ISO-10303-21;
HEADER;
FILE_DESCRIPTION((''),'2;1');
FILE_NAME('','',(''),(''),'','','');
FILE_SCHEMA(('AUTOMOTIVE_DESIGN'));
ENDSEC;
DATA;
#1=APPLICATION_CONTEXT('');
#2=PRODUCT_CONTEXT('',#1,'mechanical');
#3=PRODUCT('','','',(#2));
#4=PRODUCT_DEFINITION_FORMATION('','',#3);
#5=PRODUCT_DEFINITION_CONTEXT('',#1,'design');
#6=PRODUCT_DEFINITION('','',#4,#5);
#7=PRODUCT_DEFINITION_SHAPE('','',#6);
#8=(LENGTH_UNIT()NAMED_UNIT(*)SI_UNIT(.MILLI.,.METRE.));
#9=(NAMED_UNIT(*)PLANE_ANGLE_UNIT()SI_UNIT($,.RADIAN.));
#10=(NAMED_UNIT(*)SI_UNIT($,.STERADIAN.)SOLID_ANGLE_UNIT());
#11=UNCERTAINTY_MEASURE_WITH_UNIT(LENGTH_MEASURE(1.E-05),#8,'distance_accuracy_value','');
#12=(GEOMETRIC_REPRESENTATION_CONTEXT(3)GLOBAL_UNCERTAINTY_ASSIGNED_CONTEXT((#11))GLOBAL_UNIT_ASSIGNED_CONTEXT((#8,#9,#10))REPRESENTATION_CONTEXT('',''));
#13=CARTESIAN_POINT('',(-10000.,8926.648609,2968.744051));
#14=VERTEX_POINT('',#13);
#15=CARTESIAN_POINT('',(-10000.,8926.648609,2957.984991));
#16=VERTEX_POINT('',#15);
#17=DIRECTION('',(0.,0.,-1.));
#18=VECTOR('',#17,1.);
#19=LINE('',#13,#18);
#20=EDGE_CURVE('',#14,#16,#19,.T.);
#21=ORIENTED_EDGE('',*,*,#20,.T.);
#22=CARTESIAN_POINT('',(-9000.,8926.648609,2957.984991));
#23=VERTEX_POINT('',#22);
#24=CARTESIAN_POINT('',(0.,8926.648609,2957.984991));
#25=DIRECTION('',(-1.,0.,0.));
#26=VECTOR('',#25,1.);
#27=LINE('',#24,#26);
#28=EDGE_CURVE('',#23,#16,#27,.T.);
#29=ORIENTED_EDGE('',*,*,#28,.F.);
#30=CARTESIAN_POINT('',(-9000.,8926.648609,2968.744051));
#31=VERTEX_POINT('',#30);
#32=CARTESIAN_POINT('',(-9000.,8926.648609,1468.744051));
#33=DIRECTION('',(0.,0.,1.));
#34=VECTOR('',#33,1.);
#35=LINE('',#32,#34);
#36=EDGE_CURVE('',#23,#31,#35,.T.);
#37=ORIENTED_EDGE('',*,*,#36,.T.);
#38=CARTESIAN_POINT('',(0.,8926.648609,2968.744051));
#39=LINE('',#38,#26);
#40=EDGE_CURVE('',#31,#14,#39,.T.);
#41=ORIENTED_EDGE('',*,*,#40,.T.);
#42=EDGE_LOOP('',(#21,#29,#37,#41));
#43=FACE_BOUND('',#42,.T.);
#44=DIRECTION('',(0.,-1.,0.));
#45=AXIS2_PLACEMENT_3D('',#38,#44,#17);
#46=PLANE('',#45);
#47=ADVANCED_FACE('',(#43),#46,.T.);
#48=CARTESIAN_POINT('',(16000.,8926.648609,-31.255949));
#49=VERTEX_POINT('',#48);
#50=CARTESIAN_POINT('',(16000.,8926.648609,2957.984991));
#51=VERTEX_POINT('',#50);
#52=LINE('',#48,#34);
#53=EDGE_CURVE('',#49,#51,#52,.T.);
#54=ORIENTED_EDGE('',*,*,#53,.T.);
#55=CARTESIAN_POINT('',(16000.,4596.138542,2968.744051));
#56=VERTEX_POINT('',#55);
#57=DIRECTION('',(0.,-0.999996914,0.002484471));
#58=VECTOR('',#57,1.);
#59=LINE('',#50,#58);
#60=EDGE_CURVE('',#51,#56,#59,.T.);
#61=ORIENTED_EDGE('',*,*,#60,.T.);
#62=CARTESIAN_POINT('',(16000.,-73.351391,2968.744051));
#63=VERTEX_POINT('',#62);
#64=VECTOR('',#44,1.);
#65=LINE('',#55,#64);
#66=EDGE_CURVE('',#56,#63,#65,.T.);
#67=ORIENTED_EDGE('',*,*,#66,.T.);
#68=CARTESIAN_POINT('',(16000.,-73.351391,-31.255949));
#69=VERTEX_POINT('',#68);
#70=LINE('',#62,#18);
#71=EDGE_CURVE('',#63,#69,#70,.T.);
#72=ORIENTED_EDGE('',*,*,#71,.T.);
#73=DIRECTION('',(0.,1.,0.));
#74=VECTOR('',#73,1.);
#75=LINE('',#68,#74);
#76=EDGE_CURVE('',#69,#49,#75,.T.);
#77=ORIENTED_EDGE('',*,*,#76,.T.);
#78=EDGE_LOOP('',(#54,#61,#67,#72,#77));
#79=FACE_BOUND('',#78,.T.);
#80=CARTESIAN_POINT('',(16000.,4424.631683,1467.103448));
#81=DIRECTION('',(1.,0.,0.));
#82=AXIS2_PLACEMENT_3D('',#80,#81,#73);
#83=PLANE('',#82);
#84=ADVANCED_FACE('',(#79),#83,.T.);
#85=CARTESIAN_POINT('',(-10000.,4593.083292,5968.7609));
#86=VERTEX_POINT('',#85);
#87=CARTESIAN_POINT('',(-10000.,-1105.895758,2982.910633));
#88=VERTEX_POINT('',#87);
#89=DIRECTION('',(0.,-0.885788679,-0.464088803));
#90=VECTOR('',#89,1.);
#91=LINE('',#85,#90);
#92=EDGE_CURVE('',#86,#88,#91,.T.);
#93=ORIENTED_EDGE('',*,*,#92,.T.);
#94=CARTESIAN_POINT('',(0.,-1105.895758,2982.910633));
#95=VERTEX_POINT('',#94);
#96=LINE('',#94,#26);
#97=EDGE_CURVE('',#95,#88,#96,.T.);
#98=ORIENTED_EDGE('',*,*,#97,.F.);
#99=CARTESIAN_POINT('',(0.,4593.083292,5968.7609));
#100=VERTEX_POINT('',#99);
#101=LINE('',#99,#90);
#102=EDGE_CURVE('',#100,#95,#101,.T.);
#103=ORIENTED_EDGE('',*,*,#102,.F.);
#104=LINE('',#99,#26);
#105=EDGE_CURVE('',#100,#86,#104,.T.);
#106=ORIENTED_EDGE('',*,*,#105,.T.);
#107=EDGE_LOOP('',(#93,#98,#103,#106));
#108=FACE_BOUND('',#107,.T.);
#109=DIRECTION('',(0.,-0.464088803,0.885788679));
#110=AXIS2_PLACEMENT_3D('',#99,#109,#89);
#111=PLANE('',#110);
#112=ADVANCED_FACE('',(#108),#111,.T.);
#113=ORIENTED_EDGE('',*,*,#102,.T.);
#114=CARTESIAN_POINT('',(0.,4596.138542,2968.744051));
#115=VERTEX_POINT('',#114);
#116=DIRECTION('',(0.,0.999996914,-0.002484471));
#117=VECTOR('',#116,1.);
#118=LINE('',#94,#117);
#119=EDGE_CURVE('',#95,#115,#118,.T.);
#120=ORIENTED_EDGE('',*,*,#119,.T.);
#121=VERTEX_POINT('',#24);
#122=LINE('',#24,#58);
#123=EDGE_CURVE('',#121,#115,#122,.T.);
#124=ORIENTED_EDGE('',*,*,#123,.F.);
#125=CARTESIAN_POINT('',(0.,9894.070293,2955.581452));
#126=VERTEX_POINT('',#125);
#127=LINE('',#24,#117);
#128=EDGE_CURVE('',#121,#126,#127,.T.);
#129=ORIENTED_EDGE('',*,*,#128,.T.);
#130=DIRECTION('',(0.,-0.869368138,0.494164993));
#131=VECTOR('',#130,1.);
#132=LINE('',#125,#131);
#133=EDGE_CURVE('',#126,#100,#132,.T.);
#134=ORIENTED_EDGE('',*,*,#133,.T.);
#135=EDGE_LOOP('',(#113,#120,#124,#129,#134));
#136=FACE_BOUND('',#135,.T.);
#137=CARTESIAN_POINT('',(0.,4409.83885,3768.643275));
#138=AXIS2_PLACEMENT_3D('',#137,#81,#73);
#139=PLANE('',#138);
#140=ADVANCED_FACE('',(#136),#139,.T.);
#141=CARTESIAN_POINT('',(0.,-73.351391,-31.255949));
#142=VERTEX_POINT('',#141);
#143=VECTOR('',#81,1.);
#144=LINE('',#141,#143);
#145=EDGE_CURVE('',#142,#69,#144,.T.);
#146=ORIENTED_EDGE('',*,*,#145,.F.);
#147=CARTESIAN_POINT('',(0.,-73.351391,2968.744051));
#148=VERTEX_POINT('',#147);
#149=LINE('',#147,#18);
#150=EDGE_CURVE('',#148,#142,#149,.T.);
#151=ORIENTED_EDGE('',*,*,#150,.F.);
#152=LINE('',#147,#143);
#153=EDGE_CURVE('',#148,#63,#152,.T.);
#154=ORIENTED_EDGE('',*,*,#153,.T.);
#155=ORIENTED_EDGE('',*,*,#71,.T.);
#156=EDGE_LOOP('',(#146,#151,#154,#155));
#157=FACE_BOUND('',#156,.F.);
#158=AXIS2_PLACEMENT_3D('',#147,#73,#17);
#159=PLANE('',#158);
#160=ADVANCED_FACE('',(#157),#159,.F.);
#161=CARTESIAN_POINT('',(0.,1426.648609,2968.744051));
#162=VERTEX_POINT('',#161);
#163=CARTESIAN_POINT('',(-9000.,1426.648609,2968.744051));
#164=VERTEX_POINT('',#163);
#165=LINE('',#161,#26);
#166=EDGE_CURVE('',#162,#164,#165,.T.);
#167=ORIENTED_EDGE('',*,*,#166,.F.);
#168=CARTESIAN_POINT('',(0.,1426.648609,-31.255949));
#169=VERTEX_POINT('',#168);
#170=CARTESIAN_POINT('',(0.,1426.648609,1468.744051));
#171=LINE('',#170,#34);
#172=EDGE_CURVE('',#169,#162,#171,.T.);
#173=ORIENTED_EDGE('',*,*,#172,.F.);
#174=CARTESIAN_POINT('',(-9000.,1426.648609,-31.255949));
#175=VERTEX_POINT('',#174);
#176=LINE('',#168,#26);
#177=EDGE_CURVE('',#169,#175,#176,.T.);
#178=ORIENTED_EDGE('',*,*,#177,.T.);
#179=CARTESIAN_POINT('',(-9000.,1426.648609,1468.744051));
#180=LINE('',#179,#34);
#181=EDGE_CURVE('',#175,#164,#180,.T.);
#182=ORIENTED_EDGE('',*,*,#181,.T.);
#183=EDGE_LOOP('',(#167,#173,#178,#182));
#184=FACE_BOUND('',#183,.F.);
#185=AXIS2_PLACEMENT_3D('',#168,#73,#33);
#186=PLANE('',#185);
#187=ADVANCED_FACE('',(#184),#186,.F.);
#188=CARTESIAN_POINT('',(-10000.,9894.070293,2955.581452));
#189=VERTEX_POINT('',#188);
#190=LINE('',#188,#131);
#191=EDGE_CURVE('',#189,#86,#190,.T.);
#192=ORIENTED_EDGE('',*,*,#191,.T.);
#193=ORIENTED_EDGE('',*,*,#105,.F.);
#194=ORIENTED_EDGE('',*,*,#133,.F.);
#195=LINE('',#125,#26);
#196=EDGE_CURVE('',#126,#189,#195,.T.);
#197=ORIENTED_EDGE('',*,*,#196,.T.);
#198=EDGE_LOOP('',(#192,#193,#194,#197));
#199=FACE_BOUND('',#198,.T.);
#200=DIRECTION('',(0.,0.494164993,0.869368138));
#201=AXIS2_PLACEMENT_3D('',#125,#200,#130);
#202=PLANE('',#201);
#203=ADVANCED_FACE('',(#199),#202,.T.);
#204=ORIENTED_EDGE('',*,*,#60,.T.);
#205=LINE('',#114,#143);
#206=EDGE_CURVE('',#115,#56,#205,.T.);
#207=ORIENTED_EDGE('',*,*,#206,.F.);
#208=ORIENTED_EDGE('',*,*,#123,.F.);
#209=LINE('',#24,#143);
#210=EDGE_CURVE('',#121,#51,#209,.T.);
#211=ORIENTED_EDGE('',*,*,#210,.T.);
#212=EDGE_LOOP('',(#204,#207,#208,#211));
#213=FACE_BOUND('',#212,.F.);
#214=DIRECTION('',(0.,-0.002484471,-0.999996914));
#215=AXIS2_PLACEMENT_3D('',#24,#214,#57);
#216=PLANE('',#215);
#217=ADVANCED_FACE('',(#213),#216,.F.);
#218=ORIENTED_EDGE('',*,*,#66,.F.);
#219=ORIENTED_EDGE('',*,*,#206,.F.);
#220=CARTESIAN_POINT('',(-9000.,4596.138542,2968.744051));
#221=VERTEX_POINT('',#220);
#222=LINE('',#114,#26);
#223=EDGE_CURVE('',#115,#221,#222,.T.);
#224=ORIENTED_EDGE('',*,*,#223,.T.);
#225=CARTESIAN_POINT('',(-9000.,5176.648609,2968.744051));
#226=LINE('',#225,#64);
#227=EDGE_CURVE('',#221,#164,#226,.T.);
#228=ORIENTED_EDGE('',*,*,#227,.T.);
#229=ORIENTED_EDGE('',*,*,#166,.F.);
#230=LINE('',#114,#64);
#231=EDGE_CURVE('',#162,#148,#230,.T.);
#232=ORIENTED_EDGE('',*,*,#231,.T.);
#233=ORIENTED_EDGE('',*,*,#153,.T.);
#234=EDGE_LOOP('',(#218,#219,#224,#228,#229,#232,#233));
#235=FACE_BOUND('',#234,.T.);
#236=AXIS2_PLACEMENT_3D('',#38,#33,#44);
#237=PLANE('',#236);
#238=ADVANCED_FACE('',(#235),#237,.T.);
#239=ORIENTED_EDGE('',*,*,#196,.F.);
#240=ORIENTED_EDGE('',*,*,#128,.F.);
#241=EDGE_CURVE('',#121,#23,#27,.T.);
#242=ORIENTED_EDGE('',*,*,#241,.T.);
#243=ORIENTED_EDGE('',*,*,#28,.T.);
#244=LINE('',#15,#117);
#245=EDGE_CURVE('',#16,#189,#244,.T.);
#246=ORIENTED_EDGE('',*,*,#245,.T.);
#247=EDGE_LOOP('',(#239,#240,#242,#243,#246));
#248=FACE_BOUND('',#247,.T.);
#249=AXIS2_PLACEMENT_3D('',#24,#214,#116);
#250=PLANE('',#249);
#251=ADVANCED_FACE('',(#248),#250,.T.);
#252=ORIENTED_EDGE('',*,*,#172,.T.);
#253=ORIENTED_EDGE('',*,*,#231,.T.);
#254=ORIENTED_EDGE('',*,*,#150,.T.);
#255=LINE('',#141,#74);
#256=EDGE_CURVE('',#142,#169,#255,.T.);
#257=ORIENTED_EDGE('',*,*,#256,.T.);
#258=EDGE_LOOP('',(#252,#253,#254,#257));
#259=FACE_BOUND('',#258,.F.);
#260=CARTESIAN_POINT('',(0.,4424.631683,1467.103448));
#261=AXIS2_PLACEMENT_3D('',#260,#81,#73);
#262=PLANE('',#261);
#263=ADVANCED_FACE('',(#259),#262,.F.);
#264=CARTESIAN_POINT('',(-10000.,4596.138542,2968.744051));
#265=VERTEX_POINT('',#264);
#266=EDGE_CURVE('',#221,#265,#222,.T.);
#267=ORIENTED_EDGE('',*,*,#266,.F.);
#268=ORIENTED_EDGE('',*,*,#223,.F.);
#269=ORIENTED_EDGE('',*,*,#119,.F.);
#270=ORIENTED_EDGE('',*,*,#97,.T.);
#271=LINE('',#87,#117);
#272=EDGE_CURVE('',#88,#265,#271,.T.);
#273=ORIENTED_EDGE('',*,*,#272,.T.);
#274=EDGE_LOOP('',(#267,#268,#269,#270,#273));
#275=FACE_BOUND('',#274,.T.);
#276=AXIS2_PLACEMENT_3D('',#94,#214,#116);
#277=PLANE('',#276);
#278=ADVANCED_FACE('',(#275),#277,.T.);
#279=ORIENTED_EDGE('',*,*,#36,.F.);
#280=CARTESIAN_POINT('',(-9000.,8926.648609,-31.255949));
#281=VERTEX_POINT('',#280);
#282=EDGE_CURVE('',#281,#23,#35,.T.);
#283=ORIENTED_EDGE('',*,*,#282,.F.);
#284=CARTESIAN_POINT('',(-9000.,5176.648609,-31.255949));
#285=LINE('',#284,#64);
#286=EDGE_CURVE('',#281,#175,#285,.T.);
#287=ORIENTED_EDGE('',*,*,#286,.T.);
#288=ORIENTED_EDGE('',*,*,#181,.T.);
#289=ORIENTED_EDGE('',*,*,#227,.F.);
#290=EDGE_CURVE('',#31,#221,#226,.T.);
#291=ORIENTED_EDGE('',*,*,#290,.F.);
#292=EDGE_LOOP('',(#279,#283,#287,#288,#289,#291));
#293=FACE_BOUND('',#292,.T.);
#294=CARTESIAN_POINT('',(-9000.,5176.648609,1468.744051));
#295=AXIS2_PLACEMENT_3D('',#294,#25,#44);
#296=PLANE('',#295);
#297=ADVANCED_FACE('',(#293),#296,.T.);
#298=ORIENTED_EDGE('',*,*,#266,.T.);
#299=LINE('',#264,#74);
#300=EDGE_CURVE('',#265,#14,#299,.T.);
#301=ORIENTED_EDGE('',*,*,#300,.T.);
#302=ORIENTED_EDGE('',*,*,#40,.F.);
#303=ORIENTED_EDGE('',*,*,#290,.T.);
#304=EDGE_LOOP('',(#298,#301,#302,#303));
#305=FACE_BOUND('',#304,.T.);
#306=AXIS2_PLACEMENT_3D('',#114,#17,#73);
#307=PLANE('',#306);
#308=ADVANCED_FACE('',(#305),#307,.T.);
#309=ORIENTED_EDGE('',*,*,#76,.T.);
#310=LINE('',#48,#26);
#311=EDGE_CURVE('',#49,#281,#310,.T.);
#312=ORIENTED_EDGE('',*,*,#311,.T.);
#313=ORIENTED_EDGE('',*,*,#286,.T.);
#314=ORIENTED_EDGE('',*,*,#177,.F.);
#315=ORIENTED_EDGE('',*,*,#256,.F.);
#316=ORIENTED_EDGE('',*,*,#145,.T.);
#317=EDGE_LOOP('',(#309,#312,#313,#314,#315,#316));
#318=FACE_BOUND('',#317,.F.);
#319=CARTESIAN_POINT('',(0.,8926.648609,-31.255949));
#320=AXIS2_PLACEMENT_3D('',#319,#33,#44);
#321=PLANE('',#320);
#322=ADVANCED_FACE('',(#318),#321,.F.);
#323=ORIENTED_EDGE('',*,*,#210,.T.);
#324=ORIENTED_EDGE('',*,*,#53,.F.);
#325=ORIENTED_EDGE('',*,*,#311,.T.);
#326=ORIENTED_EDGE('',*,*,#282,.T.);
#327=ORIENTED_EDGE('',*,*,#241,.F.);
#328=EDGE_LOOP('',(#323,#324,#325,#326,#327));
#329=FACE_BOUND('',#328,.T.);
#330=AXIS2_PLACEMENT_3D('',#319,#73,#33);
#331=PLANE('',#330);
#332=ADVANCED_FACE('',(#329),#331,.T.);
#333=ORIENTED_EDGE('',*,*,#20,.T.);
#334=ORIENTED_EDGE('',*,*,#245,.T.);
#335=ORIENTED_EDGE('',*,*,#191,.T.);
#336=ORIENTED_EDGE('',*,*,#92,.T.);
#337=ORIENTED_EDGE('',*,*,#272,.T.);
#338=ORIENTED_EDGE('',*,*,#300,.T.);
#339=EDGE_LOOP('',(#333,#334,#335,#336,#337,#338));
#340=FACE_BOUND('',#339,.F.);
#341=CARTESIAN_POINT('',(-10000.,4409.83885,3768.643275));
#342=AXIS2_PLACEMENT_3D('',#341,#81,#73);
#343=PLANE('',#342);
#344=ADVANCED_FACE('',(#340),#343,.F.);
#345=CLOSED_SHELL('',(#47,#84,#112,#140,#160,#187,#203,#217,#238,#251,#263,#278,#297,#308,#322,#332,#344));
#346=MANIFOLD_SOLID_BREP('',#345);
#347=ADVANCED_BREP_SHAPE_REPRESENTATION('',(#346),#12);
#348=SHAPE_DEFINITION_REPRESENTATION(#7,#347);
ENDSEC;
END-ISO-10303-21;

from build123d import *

# Parameters (mm, degrees)
F1_DEPTH = 16000
F2_W     = 7500
F2_H     = 3000
F3_DEPTH = 9000
F5_DEPTH = 10000


# Not quite as in the source:
# - the program builds the solid bodies; features that only make, move or delete a surface that nothing else refers to are left out


with BuildPart() as f1:
    # F0 (on Right) → F1 (new body)
    with BuildSketch(Plane.YZ):
        Polygon((4596.1385421307, 2968.7440507114), (-73.3513906598, 2968.7440507114), (-73.3513906598, -31.2559492886), (8926.6486093402, -31.2559492886), (8926.6486093402, 2957.9849909845), align=None)
    extrude(amount=F1_DEPTH)

    # F2 (on face) → F3 (join)
    with BuildSketch(Plane(origin=(0, 0, 0), x_dir=(0, -1, 0), z_dir=(-1, 0, 0))):
        with Locations((-5176.6486093402, 1468.7440507114)):
            Rectangle(F2_W, F2_H)
    extrude(amount=F3_DEPTH)

    # F0 (on Right) → F5 (join)
    with BuildSketch(Plane.YZ):
        Polygon((-1105.8957576752, 2982.9106330872), (4596.1385421307, 2968.7440507114), (8926.6486093402, 2968.7440507114), (8926.6486093402, 2957.9849909845), (9894.0702929946, 2955.5814524835), (4593.083292274, 5968.7609003512), align=None)
    extrude(amount=-F5_DEPTH)


solid = f1.part
